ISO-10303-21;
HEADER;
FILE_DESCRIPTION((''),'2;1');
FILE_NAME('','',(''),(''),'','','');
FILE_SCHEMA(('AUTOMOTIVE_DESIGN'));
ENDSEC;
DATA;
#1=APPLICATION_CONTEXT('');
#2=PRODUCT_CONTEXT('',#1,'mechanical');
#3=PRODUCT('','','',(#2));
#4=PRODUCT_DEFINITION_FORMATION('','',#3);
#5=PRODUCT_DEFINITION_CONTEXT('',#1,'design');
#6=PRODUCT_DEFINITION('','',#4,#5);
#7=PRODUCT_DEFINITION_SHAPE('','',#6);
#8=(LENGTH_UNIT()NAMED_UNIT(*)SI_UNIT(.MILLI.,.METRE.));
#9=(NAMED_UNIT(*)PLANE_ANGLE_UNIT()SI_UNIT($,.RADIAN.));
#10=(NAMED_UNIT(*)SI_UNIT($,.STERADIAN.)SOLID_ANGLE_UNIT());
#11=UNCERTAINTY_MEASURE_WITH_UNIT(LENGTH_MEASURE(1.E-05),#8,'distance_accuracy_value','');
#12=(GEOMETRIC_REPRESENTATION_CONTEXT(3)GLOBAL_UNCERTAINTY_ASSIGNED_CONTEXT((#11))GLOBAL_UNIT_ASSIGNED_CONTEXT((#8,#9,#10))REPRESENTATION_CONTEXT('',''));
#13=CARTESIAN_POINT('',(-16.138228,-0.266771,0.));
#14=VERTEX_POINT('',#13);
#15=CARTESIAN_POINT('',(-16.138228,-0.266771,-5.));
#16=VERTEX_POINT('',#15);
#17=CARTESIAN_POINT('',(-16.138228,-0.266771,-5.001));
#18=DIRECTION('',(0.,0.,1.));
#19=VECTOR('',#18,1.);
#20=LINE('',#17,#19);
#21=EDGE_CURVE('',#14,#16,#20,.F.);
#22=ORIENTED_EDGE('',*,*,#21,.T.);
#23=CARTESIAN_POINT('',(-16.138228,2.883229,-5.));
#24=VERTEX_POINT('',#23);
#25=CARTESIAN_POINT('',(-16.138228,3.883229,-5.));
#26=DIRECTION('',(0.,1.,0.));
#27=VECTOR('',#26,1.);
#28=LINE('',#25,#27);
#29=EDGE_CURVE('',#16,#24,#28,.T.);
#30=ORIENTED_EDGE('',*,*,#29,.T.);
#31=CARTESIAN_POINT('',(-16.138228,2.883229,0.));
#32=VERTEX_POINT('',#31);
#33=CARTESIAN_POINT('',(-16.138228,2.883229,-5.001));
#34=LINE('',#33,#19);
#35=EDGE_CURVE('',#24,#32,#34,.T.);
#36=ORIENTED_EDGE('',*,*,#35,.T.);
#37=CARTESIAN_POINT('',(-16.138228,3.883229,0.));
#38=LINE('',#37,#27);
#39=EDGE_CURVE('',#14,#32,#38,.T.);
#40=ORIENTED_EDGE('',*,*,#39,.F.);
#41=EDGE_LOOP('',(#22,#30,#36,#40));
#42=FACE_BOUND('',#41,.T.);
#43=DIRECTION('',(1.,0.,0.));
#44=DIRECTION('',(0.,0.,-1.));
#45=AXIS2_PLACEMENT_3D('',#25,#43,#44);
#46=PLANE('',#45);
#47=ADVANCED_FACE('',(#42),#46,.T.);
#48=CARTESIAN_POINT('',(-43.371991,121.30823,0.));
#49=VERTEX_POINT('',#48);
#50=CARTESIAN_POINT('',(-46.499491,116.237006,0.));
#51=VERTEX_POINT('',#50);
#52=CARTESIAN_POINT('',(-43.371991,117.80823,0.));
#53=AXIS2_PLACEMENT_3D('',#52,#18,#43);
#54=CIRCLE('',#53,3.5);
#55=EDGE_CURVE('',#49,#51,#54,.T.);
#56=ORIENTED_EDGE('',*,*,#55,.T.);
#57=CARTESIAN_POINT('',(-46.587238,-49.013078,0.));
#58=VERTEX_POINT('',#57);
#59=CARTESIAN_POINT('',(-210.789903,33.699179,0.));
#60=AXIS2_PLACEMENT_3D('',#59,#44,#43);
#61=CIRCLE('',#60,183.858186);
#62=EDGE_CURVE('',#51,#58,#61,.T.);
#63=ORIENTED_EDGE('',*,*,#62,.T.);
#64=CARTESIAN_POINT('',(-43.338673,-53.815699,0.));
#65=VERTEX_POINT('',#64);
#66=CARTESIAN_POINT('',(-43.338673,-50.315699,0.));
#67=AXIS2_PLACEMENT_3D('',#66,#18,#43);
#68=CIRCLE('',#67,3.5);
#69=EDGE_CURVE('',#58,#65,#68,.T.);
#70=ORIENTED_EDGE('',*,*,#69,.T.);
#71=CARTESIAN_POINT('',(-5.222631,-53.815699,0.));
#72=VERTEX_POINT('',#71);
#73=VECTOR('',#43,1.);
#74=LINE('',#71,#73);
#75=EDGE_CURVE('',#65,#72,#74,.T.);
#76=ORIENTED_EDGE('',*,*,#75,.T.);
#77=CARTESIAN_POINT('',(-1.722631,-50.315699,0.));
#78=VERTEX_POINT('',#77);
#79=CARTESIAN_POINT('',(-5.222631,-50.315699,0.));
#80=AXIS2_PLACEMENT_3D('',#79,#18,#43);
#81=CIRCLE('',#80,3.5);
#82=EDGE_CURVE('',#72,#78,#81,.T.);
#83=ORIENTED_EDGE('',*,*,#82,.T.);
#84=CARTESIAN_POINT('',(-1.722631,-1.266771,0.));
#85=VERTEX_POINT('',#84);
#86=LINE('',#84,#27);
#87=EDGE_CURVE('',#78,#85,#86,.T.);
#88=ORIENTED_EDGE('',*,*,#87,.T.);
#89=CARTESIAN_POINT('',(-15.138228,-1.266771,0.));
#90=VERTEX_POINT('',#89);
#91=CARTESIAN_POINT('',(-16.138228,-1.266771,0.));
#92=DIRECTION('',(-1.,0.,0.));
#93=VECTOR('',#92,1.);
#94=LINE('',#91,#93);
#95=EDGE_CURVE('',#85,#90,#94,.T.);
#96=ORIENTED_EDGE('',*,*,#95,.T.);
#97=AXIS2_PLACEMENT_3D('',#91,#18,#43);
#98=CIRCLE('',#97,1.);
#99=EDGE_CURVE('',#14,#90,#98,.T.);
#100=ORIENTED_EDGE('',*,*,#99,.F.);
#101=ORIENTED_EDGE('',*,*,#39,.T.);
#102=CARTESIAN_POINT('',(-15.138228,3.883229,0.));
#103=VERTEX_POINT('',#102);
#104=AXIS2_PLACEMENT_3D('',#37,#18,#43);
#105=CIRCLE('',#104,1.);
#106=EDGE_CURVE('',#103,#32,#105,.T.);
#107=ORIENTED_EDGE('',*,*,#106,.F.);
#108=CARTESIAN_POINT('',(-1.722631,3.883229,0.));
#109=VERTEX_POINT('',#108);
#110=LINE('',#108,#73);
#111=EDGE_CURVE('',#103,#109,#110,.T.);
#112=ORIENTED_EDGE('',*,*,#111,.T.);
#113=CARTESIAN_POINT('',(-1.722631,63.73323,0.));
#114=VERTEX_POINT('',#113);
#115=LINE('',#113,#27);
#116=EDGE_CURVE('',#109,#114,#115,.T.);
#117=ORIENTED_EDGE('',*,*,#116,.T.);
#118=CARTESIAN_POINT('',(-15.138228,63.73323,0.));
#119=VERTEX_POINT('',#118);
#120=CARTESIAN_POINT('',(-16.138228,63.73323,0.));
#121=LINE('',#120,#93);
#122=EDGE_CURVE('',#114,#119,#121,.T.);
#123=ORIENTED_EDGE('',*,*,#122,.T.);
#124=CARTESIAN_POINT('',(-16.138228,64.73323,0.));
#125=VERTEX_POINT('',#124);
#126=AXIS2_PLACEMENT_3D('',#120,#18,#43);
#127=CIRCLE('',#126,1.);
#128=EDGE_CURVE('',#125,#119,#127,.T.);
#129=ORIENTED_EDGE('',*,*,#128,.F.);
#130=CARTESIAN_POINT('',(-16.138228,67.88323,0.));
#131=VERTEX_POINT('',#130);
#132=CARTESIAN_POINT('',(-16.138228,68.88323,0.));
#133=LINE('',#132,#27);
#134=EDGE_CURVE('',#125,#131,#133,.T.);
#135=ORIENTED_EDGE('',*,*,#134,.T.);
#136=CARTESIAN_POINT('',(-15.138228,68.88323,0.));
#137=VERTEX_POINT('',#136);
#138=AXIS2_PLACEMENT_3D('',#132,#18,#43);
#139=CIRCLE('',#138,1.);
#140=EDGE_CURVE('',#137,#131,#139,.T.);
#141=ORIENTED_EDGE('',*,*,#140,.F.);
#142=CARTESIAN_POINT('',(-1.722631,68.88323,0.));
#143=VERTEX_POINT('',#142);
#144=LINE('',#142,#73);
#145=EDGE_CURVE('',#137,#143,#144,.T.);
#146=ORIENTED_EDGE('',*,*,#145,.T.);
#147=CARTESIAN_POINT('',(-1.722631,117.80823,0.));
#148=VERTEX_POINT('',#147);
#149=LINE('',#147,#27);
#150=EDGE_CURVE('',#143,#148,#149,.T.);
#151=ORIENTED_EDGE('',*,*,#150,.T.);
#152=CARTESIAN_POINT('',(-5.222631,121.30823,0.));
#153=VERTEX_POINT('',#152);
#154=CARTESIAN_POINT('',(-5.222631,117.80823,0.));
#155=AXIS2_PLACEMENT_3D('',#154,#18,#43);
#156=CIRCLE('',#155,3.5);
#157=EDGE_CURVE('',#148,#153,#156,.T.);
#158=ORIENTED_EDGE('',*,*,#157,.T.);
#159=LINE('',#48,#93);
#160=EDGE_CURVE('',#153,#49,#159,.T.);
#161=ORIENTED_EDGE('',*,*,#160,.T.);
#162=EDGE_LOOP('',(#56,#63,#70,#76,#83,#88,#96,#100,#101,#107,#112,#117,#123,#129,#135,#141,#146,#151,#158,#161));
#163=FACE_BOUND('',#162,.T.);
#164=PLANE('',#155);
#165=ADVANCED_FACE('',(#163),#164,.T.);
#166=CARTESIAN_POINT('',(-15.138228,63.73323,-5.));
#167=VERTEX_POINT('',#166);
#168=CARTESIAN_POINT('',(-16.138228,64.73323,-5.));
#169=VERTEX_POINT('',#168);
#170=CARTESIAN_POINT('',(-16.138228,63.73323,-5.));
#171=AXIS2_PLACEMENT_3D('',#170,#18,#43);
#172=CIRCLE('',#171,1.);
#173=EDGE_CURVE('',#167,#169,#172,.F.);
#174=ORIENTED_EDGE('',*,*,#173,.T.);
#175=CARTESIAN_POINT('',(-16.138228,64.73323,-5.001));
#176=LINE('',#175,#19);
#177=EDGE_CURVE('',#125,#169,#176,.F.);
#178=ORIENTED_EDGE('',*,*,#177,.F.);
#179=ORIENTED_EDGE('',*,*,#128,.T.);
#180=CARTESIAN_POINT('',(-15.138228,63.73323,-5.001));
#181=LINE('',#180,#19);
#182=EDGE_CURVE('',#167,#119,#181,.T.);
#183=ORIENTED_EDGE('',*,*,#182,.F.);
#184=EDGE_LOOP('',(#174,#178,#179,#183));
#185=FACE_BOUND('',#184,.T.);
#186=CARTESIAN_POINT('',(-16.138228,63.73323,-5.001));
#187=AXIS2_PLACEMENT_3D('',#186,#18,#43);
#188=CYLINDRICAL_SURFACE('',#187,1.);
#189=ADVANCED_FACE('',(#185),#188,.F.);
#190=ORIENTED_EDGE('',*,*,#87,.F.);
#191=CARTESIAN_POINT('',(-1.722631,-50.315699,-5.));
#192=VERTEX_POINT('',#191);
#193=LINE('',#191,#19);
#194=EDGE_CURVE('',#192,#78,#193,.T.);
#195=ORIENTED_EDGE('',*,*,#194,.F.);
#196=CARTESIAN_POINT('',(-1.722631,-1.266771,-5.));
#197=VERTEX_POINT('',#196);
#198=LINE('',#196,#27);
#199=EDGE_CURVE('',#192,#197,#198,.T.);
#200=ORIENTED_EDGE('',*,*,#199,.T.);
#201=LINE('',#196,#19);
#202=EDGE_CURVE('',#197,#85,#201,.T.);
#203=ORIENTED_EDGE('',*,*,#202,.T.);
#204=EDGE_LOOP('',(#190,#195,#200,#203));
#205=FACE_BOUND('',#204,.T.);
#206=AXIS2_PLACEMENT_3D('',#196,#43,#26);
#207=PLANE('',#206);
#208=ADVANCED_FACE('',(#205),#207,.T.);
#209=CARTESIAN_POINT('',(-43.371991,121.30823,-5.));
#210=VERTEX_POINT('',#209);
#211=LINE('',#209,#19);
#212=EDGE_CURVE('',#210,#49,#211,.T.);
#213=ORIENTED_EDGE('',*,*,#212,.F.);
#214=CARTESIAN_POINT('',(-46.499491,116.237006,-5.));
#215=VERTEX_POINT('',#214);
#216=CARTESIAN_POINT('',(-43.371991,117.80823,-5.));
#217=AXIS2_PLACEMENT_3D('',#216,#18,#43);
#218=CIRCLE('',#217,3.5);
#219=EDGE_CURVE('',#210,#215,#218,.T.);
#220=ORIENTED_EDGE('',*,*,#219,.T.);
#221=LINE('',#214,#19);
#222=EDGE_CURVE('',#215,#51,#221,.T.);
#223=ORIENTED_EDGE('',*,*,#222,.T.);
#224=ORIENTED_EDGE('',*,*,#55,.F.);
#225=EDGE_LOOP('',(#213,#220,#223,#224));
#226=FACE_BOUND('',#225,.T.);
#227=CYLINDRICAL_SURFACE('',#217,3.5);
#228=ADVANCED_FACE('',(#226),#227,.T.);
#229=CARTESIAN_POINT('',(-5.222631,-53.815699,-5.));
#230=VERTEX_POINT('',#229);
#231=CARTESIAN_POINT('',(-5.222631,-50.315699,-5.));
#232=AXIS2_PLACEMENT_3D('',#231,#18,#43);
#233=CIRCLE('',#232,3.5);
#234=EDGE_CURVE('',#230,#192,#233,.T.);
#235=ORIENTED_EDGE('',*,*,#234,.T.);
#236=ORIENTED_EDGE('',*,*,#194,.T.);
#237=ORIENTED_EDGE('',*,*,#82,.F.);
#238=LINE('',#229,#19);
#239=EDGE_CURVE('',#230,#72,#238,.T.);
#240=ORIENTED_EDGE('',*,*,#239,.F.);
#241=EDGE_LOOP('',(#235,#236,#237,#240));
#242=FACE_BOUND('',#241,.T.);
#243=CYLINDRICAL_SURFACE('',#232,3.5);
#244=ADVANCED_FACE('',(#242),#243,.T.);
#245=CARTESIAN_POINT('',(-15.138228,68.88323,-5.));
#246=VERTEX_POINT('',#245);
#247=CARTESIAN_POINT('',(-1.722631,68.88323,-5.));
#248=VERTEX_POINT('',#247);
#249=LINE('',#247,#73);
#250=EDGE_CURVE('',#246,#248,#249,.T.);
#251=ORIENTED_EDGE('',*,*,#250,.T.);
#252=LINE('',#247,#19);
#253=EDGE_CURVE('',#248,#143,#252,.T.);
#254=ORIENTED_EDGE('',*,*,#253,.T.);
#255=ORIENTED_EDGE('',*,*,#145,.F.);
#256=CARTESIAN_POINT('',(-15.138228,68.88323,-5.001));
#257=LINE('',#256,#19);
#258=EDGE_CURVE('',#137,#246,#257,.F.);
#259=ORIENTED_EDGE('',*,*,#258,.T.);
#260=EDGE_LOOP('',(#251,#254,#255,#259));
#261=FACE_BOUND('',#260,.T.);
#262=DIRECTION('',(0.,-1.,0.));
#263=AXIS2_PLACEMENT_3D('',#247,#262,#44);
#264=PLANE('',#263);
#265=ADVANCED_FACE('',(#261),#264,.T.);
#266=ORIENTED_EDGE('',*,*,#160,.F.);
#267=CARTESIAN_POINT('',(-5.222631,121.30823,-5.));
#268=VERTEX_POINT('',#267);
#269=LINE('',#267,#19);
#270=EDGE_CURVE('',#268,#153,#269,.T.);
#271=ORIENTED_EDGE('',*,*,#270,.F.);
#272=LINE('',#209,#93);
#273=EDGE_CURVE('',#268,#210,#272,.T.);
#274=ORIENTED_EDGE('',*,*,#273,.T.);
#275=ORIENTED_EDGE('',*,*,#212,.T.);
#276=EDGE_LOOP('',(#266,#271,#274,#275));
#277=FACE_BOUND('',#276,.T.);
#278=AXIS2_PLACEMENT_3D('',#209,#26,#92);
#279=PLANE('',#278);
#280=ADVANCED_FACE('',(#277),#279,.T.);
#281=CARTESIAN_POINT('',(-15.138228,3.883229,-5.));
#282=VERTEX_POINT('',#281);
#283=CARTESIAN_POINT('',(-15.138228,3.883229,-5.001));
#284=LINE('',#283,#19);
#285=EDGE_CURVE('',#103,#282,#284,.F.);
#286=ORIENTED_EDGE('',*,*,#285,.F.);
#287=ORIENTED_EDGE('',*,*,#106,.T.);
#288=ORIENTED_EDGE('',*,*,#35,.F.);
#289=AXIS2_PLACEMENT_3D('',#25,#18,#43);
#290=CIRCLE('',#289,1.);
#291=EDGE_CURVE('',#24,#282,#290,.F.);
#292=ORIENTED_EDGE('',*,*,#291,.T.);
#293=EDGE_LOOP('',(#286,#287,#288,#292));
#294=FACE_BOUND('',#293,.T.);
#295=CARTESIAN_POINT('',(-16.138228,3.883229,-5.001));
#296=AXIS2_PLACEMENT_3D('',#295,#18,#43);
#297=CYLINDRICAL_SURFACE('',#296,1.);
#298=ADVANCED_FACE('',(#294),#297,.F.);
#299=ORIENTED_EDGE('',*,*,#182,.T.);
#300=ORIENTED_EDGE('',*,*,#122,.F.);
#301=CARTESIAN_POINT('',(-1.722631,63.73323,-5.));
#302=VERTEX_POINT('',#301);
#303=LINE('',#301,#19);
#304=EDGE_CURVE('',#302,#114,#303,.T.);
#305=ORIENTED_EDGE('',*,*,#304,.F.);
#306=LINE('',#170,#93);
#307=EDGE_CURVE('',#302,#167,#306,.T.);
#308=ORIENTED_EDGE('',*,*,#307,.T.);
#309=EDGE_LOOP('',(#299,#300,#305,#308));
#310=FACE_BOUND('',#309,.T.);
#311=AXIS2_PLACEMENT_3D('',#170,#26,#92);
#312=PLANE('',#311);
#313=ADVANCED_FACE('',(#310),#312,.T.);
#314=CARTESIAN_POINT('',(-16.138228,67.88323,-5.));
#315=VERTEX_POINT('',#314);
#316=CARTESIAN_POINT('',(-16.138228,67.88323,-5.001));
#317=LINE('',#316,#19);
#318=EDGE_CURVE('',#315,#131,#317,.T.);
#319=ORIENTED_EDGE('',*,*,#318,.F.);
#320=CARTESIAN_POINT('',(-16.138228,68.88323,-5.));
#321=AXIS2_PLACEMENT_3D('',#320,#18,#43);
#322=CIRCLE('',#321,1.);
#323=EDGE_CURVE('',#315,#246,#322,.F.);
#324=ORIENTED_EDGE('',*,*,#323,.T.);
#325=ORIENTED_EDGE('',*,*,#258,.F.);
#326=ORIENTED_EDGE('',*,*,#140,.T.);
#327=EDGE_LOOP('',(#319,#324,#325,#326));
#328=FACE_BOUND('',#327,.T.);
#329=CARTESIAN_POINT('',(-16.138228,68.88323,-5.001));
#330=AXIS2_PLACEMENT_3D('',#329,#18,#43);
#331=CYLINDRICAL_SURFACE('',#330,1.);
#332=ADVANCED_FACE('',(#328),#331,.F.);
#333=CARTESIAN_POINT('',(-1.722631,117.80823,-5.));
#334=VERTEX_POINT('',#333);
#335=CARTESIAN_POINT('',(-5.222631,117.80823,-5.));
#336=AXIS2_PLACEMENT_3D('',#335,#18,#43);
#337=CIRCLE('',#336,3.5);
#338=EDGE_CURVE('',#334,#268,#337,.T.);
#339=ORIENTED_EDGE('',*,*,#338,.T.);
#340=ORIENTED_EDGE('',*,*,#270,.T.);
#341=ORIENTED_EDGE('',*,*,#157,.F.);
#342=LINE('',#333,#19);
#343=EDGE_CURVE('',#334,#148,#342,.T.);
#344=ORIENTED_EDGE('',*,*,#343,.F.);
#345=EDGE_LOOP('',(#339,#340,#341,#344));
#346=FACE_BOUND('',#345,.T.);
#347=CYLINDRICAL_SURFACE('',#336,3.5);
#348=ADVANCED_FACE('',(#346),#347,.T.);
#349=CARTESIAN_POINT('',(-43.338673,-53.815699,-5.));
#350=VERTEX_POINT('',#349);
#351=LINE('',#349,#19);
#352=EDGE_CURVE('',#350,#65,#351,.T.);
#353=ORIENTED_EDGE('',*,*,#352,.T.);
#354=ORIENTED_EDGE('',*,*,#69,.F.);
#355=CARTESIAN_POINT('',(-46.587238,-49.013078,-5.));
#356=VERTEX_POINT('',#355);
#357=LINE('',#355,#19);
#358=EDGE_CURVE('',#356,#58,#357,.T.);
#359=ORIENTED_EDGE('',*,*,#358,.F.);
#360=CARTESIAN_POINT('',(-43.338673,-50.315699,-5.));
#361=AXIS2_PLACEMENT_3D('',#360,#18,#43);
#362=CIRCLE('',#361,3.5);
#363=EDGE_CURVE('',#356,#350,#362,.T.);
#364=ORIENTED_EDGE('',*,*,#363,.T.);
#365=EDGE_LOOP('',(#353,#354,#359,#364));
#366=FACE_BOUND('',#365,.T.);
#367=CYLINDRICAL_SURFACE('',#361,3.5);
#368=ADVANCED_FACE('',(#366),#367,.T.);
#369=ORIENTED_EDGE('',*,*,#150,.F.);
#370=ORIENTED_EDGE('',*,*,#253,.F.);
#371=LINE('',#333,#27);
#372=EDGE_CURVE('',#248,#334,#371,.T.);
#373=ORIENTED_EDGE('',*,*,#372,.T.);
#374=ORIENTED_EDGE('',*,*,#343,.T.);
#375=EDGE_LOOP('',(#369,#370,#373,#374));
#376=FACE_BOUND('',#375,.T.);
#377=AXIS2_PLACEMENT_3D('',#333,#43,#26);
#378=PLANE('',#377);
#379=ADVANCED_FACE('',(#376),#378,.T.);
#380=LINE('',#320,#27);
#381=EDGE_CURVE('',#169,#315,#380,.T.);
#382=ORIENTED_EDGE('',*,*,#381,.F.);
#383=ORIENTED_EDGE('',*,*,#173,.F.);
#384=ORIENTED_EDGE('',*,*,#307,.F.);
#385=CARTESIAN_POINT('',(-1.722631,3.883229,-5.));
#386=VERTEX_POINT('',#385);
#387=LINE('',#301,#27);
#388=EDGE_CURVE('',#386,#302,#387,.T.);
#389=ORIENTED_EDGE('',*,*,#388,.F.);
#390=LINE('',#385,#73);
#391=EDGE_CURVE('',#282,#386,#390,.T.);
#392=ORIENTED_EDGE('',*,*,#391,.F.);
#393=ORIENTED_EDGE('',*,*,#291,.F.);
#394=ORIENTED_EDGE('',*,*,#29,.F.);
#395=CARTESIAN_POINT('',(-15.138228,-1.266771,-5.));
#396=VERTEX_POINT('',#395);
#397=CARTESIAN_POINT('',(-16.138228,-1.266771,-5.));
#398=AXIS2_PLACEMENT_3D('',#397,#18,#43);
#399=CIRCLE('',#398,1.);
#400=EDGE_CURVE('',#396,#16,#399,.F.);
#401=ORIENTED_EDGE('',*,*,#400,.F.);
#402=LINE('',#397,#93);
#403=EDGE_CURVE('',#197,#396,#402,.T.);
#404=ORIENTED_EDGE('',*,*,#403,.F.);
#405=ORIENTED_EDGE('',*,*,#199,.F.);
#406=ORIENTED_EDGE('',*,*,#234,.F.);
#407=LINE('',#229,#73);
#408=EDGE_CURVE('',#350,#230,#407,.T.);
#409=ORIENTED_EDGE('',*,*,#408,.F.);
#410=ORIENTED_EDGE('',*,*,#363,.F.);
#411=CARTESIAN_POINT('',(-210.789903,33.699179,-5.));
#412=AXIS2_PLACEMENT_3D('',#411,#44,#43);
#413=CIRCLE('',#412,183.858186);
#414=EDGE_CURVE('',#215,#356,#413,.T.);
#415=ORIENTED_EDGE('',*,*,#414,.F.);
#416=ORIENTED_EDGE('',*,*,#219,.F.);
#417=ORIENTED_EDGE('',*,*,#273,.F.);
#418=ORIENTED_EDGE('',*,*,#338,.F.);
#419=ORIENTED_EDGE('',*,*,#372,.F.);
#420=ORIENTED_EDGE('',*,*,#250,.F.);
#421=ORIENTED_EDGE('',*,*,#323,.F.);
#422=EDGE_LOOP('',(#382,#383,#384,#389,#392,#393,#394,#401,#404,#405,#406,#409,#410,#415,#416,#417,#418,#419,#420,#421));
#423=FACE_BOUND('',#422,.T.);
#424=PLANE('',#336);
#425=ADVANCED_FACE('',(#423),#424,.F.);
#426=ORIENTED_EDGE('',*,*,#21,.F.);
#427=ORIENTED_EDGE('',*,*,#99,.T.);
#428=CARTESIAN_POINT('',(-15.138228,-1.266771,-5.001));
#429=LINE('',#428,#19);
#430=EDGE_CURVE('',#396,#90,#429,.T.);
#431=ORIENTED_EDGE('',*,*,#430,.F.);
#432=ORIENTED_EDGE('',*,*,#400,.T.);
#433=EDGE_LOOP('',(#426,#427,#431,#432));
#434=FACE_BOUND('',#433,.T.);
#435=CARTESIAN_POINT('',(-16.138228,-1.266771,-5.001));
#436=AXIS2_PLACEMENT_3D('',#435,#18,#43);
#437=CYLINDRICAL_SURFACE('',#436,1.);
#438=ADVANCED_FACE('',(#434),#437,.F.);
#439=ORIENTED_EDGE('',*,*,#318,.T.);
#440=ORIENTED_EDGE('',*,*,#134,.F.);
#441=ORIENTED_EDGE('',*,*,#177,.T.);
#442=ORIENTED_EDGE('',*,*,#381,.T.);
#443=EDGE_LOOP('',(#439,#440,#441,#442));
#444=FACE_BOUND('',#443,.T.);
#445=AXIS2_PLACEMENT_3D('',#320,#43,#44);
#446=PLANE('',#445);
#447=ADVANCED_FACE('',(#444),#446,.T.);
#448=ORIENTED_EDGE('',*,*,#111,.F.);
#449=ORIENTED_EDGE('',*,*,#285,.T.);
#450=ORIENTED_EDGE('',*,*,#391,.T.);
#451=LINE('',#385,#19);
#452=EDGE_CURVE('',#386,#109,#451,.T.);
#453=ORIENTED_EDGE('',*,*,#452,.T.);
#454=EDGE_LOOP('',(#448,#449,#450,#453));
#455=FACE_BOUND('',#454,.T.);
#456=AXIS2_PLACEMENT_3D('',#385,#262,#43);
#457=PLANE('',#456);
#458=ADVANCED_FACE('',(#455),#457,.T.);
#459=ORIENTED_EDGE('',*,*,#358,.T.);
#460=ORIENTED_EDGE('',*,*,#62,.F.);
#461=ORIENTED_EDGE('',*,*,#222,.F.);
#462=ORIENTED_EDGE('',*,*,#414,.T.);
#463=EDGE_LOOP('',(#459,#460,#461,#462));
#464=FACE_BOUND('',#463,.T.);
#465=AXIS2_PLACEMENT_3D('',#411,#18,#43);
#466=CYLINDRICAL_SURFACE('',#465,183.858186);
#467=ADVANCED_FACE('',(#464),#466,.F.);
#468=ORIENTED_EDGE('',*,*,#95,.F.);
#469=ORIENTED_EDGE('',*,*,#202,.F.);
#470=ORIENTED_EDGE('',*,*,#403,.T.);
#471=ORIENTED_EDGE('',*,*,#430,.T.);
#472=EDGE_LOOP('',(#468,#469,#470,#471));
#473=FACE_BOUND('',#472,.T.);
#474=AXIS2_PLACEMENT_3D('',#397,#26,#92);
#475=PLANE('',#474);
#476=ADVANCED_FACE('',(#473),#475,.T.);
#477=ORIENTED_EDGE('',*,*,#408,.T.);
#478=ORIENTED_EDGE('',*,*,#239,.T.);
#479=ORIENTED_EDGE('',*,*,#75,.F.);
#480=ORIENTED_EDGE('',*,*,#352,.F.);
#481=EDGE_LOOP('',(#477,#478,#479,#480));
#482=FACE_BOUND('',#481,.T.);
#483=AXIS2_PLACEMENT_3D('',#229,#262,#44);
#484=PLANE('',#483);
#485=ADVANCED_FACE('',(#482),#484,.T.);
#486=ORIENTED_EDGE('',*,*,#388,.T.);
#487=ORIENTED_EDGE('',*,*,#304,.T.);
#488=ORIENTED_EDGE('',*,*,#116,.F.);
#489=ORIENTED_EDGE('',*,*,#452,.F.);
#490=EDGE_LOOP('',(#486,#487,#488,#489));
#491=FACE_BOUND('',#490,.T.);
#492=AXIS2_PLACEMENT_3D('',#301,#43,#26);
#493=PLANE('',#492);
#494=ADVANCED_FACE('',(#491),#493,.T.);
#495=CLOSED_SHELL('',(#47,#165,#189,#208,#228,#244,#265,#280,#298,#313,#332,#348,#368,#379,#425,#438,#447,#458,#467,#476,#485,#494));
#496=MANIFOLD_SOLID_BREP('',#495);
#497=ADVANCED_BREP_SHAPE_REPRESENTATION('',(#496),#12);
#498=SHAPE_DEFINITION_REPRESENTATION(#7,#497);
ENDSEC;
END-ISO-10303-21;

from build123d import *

# Parameters (mm, degrees)
FLANGE_BASE1_DEPTH    = 5
CORTE_EXTRUS_O1_REACH = 132.145
ESBO_O2_R             = 1


# Sheet-metal steps are written as plain solids
with BuildPart() as part:
    # Esboço1 → Flange-base1 (new body)
    with BuildSketch(Plane.XY):
        with BuildLine():
            Line((-1.722631236, 117.808229797), (-1.722631236, 68.883230259))
            Line((-1.722631236, 68.883230259), (-16.138228035, 68.883230259))
            Line((-16.138228035, 68.883230259), (-16.138228035, 63.733230259))
            Line((-16.138228035, 63.733230259), (-1.722631236, 63.733230259))
            Line((-1.722631236, 63.733230259), (-1.722631236, 3.883229335))
            Line((-1.722631236, 3.883229335), (-16.138228035, 3.883229335))
            Line((-16.138228035, 3.883229335), (-16.138228035, -1.266770665))
            Line((-16.138228035, -1.266770665), (-1.722631236, -1.266770665))
            Line((-1.722631236, -1.266770665), (-1.722631236, -50.315698913))
            ThreePointArc((-1.722631236, -50.315698913), (-2.747757502, -52.790572648), (-5.222631236, -53.815698913))
            Line((-5.222631236, -53.815698913), (-43.33867275, -53.815698913))
            ThreePointArc((-43.33867275, -53.815698913), (-46.237739354, -52.276671331), (-46.587238264, -49.01307767))
            ThreePointArc((-46.587238264, -49.01307767), (-26.931743246, 33.601550332), (-46.499490821, 116.237005793))
            ThreePointArc((-46.499490821, 116.237005793), (-46.351024737, 119.645444535), (-43.371991, 121.308229797))
            Line((-43.371991, 121.308229797), (-5.222631236, 121.308229797))
            ThreePointArc((-5.222631236, 121.308229797), (-2.747757502, 120.283103531), (-1.722631236, 117.808229797))
        make_face()
    extrude(amount=-FLANGE_BASE1_DEPTH)

    # Esboço2 → Corte-extrusão1 (cut, up to next)
    with BuildSketch(Plane.XY, mode=Mode.PRIVATE) as corte_extrus_o1_sk1:
        with Locations((-16.138228035, 68.883230259)):
            Circle(ESBO_O2_R)
    corte_extrus_o1_tool1 = extrude(corte_extrus_o1_sk1.sketch, amount=-CORTE_EXTRUS_O1_REACH, mode=Mode.PRIVATE) & part.part
    # Esboço2 → Corte-extrusão1 (cut, up to next)
    with BuildSketch(Plane.XY, mode=Mode.PRIVATE) as corte_extrus_o1_sk2:
        with Locations((-16.138228035, 63.733230259)):
            Circle(ESBO_O2_R)
    corte_extrus_o1_tool2 = extrude(corte_extrus_o1_sk2.sketch, amount=-CORTE_EXTRUS_O1_REACH, mode=Mode.PRIVATE) & part.part
    # Esboço2 → Corte-extrusão1 (cut, up to next)
    with BuildSketch(Plane.XY, mode=Mode.PRIVATE) as corte_extrus_o1_sk3:
        with Locations((-16.138228035, 3.883229335)):
            Circle(ESBO_O2_R)
    corte_extrus_o1_tool3 = extrude(corte_extrus_o1_sk3.sketch, amount=-CORTE_EXTRUS_O1_REACH, mode=Mode.PRIVATE) & part.part
    # Esboço2 → Corte-extrusão1 (cut, up to next)
    with BuildSketch(Plane.XY, mode=Mode.PRIVATE) as corte_extrus_o1_sk4:
        with Locations((-16.138228035, -1.266770665)):
            Circle(ESBO_O2_R)
    corte_extrus_o1_tool4 = extrude(corte_extrus_o1_sk4.sketch, amount=-CORTE_EXTRUS_O1_REACH, mode=Mode.PRIVATE) & part.part
    add(corte_extrus_o1_tool1.solids().sort_by_distance((-16.138228, 68.88323, 0))[0], mode=Mode.SUBTRACT)
    add(corte_extrus_o1_tool2.solids().sort_by_distance((-16.138228, 63.73323, 0))[0], mode=Mode.SUBTRACT)
    add(corte_extrus_o1_tool3.solids().sort_by_distance((-16.138228, 3.883229, 0))[0], mode=Mode.SUBTRACT)
    add(corte_extrus_o1_tool4.solids().sort_by_distance((-16.138228, -1.266771, 0))[0], mode=Mode.SUBTRACT)


solid = part.part
